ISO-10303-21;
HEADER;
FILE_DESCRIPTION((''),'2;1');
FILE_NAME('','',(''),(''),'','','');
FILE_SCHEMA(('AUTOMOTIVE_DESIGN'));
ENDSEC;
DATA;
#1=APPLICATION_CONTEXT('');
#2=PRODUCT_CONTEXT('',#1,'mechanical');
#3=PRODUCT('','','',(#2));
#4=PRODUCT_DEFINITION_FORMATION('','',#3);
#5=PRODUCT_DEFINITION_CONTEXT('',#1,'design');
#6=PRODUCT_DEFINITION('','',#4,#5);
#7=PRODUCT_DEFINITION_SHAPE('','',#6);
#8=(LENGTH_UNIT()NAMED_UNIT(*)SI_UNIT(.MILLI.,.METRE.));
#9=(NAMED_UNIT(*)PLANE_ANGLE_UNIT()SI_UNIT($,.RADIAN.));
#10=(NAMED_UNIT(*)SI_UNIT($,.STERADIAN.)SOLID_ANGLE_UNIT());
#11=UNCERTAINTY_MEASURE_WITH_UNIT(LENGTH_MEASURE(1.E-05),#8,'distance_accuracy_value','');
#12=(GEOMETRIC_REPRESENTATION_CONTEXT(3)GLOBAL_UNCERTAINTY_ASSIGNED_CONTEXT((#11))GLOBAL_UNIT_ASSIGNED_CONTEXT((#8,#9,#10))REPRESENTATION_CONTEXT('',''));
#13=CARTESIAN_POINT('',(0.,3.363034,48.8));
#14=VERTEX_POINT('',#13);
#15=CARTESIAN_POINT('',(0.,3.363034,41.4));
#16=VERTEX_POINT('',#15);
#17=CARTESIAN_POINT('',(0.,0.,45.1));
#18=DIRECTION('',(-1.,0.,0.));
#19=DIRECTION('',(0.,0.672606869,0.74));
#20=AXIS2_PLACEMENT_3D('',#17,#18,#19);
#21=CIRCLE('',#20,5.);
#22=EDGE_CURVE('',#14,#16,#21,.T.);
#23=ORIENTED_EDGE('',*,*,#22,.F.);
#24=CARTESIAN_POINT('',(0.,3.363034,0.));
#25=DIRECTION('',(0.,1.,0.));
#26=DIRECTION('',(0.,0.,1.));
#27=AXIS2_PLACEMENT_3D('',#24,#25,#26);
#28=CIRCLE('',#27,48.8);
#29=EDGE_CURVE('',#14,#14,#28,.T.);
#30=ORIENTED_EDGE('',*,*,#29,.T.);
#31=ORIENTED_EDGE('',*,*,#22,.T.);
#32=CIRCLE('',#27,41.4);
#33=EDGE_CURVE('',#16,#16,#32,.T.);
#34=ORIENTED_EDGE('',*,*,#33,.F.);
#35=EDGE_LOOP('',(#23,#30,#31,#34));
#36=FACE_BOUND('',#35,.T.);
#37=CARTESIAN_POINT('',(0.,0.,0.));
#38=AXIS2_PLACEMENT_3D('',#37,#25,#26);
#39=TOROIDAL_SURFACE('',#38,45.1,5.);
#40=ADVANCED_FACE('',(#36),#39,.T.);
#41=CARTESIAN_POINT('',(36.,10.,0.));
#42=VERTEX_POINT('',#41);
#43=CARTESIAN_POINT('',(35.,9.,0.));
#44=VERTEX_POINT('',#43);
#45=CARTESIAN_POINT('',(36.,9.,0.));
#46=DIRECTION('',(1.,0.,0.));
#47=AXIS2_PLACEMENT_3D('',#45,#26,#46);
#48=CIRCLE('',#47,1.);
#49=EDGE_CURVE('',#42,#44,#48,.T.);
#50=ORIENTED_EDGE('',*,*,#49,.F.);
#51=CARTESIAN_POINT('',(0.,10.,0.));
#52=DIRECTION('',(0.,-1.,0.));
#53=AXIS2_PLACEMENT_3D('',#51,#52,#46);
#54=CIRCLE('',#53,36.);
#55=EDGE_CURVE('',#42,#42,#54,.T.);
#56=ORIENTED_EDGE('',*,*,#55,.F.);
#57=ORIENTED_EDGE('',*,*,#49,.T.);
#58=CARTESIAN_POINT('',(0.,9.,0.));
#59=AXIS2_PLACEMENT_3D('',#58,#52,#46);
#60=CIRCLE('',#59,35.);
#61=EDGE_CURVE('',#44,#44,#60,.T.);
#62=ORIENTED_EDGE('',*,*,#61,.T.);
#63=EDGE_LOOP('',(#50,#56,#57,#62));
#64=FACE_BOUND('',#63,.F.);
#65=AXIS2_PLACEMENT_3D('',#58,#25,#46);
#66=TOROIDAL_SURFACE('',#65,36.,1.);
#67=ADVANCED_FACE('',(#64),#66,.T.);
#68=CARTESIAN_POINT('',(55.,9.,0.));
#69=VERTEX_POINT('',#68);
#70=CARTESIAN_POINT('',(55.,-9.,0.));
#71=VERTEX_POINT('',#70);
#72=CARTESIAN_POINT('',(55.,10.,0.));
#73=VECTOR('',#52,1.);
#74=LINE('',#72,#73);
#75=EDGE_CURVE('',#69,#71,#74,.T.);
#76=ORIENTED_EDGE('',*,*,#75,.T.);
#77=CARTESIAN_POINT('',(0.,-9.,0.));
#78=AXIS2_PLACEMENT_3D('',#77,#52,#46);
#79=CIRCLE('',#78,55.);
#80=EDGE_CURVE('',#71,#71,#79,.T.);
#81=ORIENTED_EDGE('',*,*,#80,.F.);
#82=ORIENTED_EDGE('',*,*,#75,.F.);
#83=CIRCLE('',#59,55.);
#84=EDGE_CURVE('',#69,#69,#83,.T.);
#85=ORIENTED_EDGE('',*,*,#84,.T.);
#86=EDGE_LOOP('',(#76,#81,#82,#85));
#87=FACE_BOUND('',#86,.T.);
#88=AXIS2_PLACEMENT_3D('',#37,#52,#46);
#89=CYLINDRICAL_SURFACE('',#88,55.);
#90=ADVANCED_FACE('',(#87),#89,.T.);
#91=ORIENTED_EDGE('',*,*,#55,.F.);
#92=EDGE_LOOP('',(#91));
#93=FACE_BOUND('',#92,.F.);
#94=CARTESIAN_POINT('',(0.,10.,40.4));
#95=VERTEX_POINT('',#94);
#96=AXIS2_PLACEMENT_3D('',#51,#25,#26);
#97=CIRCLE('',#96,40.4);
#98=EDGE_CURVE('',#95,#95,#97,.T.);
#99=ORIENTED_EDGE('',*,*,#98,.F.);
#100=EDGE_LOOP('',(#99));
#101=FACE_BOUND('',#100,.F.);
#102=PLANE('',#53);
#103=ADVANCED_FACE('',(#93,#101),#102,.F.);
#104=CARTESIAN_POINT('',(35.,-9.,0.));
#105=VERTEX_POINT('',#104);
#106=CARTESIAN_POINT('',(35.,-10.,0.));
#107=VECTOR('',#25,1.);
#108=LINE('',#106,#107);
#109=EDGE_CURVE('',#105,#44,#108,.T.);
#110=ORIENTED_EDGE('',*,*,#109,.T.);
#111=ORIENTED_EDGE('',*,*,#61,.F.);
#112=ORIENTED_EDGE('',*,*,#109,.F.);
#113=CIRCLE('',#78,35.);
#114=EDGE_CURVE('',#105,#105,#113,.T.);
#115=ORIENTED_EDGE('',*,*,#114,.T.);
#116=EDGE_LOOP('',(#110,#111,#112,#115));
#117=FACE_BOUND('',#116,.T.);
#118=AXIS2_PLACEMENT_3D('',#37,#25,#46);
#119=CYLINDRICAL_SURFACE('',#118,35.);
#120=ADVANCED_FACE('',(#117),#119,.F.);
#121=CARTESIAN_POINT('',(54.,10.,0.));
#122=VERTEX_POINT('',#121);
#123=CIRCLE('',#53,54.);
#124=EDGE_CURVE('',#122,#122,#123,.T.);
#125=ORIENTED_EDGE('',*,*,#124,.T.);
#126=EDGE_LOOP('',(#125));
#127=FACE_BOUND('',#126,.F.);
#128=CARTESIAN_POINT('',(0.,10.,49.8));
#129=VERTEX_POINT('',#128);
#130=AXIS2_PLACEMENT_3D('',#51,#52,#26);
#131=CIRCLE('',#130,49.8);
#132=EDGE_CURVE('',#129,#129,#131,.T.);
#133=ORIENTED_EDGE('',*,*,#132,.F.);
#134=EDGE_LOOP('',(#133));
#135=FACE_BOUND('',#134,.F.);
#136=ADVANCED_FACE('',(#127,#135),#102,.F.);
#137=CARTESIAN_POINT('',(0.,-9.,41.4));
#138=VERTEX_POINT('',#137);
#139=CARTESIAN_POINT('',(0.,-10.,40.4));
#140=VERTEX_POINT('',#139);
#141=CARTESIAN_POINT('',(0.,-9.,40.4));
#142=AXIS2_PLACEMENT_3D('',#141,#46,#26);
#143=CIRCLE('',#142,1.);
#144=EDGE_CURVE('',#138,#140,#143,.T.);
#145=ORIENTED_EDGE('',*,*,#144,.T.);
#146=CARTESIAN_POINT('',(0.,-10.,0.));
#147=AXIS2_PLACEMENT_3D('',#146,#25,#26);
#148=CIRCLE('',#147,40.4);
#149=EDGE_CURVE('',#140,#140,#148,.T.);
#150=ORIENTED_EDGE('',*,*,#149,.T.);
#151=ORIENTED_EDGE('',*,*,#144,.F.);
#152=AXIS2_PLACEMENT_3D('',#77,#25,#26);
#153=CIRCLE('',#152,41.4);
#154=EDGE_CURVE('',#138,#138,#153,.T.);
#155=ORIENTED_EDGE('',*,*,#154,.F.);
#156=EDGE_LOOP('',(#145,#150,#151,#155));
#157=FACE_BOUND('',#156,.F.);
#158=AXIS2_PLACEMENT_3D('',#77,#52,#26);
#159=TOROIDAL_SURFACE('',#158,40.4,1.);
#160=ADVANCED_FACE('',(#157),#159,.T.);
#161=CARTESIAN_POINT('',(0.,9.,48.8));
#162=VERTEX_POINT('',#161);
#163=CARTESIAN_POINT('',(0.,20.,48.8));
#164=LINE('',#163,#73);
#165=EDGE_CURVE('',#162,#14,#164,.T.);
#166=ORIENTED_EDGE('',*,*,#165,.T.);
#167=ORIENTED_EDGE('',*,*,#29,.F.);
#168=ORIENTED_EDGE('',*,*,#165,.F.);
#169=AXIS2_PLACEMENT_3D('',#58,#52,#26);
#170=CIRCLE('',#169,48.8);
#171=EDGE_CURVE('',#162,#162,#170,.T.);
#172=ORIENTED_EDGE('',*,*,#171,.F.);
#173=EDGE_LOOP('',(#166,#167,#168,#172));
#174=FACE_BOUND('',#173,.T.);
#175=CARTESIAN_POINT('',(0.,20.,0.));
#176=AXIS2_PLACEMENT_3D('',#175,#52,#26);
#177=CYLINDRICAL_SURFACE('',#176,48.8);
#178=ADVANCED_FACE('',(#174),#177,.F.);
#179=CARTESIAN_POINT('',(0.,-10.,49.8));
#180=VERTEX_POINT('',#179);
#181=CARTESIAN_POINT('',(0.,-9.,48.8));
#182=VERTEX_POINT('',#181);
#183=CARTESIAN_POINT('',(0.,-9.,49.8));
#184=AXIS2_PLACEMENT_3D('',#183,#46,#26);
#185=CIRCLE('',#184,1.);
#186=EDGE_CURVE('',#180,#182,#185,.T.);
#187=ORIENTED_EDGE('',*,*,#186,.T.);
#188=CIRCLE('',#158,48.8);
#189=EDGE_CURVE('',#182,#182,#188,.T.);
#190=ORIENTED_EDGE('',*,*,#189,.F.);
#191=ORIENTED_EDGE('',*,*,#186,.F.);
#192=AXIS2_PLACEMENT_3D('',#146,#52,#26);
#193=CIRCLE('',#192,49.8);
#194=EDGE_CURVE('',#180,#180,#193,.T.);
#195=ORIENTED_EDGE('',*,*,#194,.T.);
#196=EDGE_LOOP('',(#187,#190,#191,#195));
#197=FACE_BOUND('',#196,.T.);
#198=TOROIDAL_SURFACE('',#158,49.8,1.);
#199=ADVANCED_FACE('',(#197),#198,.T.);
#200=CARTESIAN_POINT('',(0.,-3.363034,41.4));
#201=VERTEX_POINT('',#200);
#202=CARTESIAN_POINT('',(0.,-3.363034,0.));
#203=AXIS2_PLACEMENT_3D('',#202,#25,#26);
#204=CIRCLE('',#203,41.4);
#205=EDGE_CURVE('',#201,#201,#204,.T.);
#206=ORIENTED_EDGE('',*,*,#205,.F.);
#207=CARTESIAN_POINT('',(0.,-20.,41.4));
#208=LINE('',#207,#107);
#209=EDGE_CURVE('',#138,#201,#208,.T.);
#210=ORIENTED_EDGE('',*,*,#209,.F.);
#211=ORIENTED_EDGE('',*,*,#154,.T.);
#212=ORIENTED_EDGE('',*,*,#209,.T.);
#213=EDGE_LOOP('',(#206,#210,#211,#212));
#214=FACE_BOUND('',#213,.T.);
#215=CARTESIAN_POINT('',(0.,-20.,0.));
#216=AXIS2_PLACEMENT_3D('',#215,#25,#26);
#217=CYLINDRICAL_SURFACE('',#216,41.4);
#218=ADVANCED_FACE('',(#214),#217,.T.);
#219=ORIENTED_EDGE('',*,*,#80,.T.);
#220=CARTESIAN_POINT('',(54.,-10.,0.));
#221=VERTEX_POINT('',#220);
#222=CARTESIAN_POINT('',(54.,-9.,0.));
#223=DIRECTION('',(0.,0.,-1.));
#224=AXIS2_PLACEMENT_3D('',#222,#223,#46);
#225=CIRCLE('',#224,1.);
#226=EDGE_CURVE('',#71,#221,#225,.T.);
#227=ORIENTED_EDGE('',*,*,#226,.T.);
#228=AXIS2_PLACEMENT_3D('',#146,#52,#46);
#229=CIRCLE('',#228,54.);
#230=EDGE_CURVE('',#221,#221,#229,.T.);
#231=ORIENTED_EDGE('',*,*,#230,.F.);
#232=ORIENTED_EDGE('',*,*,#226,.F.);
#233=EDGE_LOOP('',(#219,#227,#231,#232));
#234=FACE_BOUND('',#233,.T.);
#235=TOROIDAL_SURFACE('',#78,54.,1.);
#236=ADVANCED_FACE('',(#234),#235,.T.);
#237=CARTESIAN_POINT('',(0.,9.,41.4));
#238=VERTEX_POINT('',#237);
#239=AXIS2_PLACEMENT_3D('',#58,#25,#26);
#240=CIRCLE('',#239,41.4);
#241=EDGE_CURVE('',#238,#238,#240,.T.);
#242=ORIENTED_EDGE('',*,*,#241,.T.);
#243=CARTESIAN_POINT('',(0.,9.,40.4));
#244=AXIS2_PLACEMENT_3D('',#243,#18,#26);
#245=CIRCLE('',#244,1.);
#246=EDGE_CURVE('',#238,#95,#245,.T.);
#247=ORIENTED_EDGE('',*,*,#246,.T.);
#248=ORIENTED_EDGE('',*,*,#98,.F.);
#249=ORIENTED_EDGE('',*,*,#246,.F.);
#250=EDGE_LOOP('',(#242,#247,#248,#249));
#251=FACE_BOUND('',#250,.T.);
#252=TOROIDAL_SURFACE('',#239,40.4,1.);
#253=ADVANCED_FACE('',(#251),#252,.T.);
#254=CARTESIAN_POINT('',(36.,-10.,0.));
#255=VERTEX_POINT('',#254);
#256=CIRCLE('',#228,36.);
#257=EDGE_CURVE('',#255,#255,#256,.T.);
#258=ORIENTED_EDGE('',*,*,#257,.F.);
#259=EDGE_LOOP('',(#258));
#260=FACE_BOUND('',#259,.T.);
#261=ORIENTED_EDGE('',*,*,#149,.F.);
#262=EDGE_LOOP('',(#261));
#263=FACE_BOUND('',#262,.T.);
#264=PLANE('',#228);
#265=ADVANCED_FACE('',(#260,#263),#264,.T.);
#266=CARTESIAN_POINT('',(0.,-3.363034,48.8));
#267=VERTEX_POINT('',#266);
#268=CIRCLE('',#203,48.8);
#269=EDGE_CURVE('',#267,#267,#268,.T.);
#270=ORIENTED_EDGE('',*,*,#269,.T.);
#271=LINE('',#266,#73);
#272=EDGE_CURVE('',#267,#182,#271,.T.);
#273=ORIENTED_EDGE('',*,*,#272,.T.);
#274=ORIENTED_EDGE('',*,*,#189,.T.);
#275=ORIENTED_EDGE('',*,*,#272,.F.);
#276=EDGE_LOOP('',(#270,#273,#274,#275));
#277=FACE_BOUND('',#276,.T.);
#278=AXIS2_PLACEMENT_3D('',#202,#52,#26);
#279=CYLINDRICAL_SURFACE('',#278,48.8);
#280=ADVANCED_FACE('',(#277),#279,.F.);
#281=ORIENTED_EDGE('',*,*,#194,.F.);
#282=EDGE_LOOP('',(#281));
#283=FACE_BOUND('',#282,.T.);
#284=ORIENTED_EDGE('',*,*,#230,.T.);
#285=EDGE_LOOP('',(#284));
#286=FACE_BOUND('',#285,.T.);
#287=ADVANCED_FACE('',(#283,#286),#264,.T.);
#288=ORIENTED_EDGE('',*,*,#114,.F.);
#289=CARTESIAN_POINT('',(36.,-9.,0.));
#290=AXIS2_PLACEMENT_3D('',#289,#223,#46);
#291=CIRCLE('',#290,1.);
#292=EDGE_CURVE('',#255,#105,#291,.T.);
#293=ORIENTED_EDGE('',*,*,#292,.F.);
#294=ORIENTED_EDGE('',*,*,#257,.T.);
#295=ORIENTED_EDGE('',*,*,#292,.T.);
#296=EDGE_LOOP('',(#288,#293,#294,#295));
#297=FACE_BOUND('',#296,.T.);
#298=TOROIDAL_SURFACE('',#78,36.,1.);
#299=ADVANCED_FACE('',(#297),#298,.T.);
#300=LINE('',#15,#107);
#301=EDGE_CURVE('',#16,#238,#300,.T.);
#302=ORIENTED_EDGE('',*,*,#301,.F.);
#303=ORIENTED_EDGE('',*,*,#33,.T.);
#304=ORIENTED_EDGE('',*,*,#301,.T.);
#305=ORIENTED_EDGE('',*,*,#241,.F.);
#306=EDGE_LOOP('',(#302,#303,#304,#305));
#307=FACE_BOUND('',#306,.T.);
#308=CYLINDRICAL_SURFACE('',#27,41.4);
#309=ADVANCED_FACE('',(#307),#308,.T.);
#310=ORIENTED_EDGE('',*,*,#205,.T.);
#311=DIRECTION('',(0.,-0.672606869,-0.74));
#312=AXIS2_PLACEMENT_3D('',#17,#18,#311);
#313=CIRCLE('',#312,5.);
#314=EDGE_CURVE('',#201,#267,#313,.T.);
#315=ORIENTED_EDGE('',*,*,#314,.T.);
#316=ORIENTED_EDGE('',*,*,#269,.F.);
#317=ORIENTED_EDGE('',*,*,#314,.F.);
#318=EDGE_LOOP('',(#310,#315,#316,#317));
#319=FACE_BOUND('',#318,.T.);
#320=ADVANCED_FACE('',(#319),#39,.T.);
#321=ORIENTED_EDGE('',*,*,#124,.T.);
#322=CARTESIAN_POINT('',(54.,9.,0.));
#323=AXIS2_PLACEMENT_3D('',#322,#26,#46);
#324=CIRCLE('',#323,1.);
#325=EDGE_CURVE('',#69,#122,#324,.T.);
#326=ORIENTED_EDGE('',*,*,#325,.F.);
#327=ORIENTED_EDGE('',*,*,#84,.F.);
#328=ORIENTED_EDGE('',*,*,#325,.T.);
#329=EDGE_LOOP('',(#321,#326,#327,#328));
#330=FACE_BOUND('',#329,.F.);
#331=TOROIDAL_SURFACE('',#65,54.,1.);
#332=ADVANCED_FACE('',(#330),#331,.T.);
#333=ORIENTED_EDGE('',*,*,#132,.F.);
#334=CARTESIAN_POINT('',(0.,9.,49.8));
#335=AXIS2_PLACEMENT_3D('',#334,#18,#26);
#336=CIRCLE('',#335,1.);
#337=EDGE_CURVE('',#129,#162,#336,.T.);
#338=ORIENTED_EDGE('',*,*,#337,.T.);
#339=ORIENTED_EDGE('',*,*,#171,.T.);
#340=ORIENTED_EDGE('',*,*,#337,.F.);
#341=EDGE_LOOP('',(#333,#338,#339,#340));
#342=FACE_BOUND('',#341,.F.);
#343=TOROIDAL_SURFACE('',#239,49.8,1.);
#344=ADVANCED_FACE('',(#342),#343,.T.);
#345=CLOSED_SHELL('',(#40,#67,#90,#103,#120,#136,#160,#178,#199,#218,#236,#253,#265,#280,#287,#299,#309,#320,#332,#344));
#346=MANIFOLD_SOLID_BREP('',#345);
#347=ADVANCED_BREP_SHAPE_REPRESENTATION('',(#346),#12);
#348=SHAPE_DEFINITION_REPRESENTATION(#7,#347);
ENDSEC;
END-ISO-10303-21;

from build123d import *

# Parameters (mm, degrees)
F0_R     = 55
F0_R_2   = 35
F1_DEPTH = 10
F4_R     = 1


with BuildPart() as f1:
    # F0 (on Front) → F1 (new body, symmetric)
    with BuildSketch(Plane.XZ):
        Circle(F0_R)
        Circle(F0_R_2, mode=Mode.SUBTRACT)
    extrude(amount=F1_DEPTH, both=True)

    # F2 (on Right) → F3 (revolve, cut)
    with BuildSketch(Plane.YZ):
        with BuildLine():
            Line((-3.3630343442, 48.8), (-20, 48.8))
            Line((-20, 48.8), (-20, 41.4))
            Line((-20, 41.4), (-3.3630343442, 41.4))
            ThreePointArc((-3.3630343442, 41.4), (-5, 45.1), (-3.3630343442, 48.8))
        make_face()
        with BuildLine():
            Line((20, 41.4), (20, 48.8))
            Line((20, 48.8), (3.3630343442, 48.8))
            ThreePointArc((3.3630343442, 48.8), (5, 45.1), (3.3630343442, 41.4))
            Line((3.3630343442, 41.4), (20, 41.4))
        make_face()
    revolve(axis=Axis((0, 16.4881043163, 0), (0, 1, 0)), mode=Mode.SUBTRACT)

    # F4
    f4_edges = [f1.edges().sort_by_distance(p)[0] for p in [
        (-55, 10, 0),
        (-55, -10, 0),
        (-35, 10, 0),
        (-35, -10, 0),
        (0, -10, -48.8),
        (0, -10, -41.4),
        (0, 10, -48.8),
        (0, 10, -41.4),
    ]]
    fillet(f4_edges, radius=F4_R)


solid = f1.part
